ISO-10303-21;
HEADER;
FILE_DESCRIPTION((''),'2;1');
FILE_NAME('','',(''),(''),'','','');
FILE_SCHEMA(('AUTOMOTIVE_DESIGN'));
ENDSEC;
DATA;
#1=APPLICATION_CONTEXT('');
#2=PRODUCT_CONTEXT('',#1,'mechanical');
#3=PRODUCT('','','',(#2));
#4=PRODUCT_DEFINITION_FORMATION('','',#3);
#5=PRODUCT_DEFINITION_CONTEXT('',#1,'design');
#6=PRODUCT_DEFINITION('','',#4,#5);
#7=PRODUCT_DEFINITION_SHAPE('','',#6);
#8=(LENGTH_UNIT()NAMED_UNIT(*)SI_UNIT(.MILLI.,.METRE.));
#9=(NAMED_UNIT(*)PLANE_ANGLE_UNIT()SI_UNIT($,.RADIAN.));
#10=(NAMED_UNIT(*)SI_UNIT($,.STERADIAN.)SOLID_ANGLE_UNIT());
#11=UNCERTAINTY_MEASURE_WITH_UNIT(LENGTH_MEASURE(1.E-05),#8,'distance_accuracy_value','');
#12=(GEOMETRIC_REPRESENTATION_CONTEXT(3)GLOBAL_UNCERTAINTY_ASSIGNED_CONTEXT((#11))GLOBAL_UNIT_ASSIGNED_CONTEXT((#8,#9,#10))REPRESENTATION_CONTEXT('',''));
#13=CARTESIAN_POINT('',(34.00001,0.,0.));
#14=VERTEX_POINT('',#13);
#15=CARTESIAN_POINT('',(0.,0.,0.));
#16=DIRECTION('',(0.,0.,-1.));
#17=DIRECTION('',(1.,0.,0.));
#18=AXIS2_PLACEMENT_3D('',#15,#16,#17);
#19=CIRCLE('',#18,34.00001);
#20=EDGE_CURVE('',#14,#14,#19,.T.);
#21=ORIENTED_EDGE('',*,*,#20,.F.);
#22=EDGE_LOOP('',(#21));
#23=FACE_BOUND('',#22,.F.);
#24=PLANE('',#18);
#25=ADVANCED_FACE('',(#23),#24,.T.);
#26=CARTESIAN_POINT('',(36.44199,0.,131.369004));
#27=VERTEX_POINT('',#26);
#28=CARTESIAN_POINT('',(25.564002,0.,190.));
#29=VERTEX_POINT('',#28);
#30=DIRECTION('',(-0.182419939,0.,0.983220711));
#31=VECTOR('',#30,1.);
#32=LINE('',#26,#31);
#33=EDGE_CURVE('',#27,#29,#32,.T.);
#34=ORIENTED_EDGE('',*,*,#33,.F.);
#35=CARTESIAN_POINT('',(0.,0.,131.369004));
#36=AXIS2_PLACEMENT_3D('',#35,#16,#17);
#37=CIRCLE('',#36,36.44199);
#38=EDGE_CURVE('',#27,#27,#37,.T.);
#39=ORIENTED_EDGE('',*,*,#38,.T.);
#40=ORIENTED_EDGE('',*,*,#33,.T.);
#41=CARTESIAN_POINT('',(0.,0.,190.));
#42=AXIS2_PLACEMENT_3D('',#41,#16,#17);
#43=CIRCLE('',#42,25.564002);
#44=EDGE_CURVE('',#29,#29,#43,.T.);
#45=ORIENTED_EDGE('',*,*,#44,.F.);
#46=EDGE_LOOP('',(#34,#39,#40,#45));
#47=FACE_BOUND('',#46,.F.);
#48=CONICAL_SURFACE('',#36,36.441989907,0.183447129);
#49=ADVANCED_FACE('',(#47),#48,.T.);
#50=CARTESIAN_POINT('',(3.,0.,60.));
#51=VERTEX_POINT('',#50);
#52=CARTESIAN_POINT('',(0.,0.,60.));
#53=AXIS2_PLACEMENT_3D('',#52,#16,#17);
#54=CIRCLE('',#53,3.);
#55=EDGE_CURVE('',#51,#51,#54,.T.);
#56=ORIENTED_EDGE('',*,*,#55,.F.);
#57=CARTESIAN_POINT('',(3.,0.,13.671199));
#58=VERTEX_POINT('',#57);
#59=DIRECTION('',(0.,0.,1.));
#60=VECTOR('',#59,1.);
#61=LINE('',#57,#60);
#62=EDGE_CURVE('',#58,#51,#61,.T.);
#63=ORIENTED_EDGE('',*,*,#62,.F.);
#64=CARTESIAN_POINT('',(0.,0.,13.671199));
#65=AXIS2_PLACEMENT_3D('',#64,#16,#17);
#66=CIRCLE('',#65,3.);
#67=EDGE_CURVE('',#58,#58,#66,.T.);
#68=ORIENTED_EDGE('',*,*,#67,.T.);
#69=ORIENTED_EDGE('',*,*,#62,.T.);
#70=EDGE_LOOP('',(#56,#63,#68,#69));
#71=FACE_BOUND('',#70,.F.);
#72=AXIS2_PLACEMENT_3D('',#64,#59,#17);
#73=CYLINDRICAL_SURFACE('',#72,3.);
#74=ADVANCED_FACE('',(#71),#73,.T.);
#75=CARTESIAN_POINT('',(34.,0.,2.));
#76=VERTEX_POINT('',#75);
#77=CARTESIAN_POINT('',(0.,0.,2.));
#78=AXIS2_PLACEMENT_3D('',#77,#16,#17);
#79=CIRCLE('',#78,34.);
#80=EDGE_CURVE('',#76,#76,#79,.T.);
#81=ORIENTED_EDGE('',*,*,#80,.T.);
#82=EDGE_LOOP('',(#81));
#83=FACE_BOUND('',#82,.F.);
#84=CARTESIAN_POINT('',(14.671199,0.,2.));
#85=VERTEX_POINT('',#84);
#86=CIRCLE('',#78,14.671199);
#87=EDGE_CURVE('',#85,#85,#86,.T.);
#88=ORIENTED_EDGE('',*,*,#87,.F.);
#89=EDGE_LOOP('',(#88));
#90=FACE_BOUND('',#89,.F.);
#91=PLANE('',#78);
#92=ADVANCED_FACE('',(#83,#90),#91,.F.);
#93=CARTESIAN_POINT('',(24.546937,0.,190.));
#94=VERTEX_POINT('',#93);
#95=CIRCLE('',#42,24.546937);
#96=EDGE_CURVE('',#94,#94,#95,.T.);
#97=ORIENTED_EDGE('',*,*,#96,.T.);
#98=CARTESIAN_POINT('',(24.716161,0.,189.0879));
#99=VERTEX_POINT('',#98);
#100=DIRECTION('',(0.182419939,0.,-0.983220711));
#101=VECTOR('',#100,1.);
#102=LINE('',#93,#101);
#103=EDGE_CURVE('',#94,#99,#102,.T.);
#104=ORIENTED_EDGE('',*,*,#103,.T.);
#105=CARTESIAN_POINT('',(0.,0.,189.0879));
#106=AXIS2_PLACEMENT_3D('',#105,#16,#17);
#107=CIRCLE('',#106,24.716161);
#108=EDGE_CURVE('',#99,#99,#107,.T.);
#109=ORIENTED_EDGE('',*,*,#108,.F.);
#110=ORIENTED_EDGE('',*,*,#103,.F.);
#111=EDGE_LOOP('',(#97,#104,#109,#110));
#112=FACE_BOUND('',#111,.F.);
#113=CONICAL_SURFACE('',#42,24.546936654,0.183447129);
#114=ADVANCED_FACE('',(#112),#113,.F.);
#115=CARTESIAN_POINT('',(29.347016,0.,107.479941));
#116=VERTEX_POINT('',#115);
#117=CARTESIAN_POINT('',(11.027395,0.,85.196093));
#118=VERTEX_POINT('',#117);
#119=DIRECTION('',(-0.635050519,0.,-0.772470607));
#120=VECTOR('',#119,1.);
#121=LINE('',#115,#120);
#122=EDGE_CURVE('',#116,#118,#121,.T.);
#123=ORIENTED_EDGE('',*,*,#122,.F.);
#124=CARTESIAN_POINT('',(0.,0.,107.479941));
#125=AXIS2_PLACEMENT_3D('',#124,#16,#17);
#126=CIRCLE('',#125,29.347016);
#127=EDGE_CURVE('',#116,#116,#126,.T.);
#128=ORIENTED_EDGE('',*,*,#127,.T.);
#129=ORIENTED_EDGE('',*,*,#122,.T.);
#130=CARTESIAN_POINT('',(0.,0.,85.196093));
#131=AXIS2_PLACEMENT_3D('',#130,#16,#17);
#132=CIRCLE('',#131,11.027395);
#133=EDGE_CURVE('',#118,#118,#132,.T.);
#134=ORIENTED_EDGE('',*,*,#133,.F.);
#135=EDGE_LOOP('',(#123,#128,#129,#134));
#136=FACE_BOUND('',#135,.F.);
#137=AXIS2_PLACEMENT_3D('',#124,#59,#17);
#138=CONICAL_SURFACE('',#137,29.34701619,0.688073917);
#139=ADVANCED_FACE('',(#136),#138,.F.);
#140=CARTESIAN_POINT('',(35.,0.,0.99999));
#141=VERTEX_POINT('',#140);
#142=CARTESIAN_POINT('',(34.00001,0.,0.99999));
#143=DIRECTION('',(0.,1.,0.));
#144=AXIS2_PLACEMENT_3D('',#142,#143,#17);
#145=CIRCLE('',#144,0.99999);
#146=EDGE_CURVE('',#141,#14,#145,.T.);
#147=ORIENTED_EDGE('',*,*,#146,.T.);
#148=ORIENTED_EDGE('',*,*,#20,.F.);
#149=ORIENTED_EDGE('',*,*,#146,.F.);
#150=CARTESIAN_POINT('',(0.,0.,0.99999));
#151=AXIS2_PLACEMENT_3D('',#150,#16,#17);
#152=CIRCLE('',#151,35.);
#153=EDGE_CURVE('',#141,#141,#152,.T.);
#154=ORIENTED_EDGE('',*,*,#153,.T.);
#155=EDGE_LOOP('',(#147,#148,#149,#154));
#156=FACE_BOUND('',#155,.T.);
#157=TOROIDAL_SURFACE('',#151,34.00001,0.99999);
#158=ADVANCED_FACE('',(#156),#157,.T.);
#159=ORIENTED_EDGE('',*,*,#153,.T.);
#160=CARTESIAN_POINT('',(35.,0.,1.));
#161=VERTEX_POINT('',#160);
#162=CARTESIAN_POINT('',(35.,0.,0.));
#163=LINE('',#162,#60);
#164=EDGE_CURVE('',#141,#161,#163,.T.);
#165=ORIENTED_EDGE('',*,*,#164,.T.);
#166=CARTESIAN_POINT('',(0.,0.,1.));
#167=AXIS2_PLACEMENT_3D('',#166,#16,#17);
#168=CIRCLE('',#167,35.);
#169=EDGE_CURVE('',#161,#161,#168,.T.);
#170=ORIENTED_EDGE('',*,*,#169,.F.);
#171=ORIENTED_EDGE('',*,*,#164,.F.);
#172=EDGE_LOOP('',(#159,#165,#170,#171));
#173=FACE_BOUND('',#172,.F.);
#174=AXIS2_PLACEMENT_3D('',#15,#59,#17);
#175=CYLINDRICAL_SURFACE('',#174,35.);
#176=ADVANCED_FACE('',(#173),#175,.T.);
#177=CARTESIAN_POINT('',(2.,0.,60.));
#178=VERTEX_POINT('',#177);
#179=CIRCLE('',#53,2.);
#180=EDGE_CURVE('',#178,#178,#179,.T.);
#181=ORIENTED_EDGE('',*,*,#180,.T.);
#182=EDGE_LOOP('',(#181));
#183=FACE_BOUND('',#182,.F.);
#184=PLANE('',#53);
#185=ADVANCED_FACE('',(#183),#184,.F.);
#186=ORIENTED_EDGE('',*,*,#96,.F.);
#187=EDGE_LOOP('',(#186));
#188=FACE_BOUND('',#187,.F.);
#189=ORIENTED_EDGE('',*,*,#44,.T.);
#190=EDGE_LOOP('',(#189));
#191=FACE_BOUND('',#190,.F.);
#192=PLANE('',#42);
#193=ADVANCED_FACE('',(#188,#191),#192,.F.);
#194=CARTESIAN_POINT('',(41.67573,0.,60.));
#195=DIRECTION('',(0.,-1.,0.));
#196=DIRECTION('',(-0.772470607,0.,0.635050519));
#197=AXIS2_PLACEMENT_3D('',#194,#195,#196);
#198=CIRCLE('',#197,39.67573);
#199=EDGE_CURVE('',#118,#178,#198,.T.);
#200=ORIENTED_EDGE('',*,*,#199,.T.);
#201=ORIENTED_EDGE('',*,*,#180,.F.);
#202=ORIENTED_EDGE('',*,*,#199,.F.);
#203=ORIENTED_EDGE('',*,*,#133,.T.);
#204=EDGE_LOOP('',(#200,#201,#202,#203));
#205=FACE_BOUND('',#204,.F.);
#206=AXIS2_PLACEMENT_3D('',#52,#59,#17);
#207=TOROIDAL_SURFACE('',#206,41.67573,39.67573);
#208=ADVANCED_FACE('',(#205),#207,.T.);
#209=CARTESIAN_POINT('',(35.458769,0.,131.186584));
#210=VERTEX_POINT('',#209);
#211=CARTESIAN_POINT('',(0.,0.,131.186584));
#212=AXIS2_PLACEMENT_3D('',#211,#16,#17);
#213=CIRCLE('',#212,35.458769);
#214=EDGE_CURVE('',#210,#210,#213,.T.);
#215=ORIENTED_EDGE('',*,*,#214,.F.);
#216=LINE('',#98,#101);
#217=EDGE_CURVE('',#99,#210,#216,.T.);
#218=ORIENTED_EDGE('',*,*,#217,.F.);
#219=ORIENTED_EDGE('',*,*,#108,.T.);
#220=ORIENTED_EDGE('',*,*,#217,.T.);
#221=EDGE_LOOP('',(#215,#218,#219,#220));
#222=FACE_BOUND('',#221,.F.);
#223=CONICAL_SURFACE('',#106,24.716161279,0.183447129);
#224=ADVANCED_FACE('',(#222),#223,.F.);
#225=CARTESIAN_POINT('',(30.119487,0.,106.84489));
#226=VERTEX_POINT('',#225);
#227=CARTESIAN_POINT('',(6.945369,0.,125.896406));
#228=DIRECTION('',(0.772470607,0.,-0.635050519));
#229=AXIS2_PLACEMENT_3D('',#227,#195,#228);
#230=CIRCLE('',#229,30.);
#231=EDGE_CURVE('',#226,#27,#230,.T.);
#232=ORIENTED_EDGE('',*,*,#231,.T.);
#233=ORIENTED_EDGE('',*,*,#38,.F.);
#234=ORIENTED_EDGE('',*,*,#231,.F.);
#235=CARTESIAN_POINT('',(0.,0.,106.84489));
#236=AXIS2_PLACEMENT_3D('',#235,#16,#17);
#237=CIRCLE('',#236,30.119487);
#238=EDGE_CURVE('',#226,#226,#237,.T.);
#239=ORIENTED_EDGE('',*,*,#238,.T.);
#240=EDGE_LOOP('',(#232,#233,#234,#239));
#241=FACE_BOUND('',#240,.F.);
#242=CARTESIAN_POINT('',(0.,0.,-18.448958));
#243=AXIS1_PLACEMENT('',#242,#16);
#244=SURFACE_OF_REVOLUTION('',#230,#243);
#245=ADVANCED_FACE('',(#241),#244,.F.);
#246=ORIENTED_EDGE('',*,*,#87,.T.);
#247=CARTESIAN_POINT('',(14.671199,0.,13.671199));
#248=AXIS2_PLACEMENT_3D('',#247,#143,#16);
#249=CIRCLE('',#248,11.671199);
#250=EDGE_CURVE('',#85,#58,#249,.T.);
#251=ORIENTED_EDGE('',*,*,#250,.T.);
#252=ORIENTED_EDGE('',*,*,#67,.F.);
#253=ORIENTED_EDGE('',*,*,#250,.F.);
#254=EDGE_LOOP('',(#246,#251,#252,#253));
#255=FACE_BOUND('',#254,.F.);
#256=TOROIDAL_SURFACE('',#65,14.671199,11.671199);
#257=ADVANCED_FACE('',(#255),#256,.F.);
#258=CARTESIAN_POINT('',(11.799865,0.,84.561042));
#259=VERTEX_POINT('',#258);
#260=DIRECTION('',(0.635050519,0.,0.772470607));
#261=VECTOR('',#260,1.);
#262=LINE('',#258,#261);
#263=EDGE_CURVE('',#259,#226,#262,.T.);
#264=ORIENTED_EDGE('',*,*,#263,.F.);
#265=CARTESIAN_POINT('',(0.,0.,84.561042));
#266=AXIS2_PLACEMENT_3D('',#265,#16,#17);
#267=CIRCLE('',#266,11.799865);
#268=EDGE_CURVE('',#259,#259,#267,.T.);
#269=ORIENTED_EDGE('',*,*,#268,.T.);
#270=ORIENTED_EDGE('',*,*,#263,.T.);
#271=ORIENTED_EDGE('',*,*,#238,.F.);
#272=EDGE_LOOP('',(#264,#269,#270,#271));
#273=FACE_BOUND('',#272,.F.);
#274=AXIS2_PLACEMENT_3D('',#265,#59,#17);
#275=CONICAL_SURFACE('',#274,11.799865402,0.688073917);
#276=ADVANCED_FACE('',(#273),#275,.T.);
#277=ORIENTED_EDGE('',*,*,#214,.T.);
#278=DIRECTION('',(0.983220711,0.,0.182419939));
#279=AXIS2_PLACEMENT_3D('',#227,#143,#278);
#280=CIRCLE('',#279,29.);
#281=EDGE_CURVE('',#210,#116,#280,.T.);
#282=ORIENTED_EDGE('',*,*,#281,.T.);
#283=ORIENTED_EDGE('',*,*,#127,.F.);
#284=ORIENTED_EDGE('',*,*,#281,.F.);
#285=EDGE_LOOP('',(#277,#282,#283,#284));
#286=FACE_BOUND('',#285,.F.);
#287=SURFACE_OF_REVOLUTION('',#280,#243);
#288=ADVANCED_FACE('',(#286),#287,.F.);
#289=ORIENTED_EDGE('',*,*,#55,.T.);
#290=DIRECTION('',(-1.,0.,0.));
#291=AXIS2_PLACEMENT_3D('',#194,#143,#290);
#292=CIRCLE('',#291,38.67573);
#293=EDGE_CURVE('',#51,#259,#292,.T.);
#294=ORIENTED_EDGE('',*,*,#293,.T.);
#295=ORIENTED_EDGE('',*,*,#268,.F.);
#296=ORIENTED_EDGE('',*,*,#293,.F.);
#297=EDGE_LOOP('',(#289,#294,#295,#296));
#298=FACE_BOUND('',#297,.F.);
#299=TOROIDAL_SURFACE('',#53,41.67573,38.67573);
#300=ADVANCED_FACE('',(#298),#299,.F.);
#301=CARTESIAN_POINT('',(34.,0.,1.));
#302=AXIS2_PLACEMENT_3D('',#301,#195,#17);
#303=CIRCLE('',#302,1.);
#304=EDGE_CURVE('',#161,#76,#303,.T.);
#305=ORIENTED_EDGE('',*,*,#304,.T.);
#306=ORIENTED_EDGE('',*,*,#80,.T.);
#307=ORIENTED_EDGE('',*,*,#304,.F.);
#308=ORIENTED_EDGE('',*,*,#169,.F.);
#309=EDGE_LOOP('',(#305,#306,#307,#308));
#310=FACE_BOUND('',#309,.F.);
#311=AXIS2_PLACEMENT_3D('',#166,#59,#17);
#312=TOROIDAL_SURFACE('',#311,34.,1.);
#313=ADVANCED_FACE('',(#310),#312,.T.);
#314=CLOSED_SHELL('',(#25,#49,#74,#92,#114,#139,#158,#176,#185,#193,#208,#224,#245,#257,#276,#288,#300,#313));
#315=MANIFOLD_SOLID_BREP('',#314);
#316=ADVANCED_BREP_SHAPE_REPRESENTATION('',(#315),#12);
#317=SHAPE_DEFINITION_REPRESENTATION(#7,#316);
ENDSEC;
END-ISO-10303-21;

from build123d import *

# Parameters (mm, degrees)
F2_R = 1
F3_R = 0.99999


# Not quite as in the source:
# - a fillet or chamfer is up to 0.001 mm smaller than in the source, because OpenCascade refuses the exact size


with BuildPart() as f1:
    # F0 (on Front) → F1 (revolve)
    with BuildSketch(Plane.XZ):
        with BuildLine():
            Line((0, 0), (35, 0))
            Line((35, 0), (35, 2))
            Line((35, 2), (14.6711988598, 2))
            ThreePointArc((14.6711988598, 2), (6.4184150015, 5.4184150015), (3, 13.6711988598))
            Line((3, 13.6711988598), (3, 60))
            ThreePointArc((3, 60), (5.2663701885, 73.0449457567), (11.7998654023, 84.5610424876))
            Line((11.7998654023, 84.5610424876), (30.1194867973, 106.8448902178))
            ThreePointArc((30.1194867973, 106.8448902178), (35.9954931852, 118.4070626292), (36.4419899072, 131.3690039428))
            Line((36.4419899072, 131.3690039428), (25.5640022925, 190))
            Line((25.5640022925, 190), (24.5469366539, 190))
            Line((24.5469366539, 190), (24.716161279, 189.0879003841))
            Line((24.716161279, 189.0879003841), (35.4587691965, 131.186584004))
            ThreePointArc((35.4587691965, 131.186584004), (35.0271556985, 118.6567074008), (29.3470161902, 107.4799407364))
            Line((29.3470161902, 107.4799407364), (11.0273947953, 85.1960930063))
            ThreePointArc((11.0273947953, 85.1960930063), (4.3249694749, 73.3822359826), (2, 60))
            Line((2, 60), (0, 60))
            Line((0, 60), (0, 0))
        make_face()
    revolve(axis=Axis((0, 0, -18.4489581734), (0, 0, -1)))

    # F2
    f2_edges = [f1.edges().sort_by_distance(p)[0] for p in [
        (-35, 0, 2),
    ]]
    fillet(f2_edges, radius=F2_R)

    # F3 (radius 1 in the source; OpenCascade refuses exactly that, so slightly less here)
    f3_edges = [f1.edges().sort_by_distance(p)[0] for p in [
        (-35, 0, 0),
    ]]
    fillet(f3_edges, radius=F3_R)


solid = f1.part
